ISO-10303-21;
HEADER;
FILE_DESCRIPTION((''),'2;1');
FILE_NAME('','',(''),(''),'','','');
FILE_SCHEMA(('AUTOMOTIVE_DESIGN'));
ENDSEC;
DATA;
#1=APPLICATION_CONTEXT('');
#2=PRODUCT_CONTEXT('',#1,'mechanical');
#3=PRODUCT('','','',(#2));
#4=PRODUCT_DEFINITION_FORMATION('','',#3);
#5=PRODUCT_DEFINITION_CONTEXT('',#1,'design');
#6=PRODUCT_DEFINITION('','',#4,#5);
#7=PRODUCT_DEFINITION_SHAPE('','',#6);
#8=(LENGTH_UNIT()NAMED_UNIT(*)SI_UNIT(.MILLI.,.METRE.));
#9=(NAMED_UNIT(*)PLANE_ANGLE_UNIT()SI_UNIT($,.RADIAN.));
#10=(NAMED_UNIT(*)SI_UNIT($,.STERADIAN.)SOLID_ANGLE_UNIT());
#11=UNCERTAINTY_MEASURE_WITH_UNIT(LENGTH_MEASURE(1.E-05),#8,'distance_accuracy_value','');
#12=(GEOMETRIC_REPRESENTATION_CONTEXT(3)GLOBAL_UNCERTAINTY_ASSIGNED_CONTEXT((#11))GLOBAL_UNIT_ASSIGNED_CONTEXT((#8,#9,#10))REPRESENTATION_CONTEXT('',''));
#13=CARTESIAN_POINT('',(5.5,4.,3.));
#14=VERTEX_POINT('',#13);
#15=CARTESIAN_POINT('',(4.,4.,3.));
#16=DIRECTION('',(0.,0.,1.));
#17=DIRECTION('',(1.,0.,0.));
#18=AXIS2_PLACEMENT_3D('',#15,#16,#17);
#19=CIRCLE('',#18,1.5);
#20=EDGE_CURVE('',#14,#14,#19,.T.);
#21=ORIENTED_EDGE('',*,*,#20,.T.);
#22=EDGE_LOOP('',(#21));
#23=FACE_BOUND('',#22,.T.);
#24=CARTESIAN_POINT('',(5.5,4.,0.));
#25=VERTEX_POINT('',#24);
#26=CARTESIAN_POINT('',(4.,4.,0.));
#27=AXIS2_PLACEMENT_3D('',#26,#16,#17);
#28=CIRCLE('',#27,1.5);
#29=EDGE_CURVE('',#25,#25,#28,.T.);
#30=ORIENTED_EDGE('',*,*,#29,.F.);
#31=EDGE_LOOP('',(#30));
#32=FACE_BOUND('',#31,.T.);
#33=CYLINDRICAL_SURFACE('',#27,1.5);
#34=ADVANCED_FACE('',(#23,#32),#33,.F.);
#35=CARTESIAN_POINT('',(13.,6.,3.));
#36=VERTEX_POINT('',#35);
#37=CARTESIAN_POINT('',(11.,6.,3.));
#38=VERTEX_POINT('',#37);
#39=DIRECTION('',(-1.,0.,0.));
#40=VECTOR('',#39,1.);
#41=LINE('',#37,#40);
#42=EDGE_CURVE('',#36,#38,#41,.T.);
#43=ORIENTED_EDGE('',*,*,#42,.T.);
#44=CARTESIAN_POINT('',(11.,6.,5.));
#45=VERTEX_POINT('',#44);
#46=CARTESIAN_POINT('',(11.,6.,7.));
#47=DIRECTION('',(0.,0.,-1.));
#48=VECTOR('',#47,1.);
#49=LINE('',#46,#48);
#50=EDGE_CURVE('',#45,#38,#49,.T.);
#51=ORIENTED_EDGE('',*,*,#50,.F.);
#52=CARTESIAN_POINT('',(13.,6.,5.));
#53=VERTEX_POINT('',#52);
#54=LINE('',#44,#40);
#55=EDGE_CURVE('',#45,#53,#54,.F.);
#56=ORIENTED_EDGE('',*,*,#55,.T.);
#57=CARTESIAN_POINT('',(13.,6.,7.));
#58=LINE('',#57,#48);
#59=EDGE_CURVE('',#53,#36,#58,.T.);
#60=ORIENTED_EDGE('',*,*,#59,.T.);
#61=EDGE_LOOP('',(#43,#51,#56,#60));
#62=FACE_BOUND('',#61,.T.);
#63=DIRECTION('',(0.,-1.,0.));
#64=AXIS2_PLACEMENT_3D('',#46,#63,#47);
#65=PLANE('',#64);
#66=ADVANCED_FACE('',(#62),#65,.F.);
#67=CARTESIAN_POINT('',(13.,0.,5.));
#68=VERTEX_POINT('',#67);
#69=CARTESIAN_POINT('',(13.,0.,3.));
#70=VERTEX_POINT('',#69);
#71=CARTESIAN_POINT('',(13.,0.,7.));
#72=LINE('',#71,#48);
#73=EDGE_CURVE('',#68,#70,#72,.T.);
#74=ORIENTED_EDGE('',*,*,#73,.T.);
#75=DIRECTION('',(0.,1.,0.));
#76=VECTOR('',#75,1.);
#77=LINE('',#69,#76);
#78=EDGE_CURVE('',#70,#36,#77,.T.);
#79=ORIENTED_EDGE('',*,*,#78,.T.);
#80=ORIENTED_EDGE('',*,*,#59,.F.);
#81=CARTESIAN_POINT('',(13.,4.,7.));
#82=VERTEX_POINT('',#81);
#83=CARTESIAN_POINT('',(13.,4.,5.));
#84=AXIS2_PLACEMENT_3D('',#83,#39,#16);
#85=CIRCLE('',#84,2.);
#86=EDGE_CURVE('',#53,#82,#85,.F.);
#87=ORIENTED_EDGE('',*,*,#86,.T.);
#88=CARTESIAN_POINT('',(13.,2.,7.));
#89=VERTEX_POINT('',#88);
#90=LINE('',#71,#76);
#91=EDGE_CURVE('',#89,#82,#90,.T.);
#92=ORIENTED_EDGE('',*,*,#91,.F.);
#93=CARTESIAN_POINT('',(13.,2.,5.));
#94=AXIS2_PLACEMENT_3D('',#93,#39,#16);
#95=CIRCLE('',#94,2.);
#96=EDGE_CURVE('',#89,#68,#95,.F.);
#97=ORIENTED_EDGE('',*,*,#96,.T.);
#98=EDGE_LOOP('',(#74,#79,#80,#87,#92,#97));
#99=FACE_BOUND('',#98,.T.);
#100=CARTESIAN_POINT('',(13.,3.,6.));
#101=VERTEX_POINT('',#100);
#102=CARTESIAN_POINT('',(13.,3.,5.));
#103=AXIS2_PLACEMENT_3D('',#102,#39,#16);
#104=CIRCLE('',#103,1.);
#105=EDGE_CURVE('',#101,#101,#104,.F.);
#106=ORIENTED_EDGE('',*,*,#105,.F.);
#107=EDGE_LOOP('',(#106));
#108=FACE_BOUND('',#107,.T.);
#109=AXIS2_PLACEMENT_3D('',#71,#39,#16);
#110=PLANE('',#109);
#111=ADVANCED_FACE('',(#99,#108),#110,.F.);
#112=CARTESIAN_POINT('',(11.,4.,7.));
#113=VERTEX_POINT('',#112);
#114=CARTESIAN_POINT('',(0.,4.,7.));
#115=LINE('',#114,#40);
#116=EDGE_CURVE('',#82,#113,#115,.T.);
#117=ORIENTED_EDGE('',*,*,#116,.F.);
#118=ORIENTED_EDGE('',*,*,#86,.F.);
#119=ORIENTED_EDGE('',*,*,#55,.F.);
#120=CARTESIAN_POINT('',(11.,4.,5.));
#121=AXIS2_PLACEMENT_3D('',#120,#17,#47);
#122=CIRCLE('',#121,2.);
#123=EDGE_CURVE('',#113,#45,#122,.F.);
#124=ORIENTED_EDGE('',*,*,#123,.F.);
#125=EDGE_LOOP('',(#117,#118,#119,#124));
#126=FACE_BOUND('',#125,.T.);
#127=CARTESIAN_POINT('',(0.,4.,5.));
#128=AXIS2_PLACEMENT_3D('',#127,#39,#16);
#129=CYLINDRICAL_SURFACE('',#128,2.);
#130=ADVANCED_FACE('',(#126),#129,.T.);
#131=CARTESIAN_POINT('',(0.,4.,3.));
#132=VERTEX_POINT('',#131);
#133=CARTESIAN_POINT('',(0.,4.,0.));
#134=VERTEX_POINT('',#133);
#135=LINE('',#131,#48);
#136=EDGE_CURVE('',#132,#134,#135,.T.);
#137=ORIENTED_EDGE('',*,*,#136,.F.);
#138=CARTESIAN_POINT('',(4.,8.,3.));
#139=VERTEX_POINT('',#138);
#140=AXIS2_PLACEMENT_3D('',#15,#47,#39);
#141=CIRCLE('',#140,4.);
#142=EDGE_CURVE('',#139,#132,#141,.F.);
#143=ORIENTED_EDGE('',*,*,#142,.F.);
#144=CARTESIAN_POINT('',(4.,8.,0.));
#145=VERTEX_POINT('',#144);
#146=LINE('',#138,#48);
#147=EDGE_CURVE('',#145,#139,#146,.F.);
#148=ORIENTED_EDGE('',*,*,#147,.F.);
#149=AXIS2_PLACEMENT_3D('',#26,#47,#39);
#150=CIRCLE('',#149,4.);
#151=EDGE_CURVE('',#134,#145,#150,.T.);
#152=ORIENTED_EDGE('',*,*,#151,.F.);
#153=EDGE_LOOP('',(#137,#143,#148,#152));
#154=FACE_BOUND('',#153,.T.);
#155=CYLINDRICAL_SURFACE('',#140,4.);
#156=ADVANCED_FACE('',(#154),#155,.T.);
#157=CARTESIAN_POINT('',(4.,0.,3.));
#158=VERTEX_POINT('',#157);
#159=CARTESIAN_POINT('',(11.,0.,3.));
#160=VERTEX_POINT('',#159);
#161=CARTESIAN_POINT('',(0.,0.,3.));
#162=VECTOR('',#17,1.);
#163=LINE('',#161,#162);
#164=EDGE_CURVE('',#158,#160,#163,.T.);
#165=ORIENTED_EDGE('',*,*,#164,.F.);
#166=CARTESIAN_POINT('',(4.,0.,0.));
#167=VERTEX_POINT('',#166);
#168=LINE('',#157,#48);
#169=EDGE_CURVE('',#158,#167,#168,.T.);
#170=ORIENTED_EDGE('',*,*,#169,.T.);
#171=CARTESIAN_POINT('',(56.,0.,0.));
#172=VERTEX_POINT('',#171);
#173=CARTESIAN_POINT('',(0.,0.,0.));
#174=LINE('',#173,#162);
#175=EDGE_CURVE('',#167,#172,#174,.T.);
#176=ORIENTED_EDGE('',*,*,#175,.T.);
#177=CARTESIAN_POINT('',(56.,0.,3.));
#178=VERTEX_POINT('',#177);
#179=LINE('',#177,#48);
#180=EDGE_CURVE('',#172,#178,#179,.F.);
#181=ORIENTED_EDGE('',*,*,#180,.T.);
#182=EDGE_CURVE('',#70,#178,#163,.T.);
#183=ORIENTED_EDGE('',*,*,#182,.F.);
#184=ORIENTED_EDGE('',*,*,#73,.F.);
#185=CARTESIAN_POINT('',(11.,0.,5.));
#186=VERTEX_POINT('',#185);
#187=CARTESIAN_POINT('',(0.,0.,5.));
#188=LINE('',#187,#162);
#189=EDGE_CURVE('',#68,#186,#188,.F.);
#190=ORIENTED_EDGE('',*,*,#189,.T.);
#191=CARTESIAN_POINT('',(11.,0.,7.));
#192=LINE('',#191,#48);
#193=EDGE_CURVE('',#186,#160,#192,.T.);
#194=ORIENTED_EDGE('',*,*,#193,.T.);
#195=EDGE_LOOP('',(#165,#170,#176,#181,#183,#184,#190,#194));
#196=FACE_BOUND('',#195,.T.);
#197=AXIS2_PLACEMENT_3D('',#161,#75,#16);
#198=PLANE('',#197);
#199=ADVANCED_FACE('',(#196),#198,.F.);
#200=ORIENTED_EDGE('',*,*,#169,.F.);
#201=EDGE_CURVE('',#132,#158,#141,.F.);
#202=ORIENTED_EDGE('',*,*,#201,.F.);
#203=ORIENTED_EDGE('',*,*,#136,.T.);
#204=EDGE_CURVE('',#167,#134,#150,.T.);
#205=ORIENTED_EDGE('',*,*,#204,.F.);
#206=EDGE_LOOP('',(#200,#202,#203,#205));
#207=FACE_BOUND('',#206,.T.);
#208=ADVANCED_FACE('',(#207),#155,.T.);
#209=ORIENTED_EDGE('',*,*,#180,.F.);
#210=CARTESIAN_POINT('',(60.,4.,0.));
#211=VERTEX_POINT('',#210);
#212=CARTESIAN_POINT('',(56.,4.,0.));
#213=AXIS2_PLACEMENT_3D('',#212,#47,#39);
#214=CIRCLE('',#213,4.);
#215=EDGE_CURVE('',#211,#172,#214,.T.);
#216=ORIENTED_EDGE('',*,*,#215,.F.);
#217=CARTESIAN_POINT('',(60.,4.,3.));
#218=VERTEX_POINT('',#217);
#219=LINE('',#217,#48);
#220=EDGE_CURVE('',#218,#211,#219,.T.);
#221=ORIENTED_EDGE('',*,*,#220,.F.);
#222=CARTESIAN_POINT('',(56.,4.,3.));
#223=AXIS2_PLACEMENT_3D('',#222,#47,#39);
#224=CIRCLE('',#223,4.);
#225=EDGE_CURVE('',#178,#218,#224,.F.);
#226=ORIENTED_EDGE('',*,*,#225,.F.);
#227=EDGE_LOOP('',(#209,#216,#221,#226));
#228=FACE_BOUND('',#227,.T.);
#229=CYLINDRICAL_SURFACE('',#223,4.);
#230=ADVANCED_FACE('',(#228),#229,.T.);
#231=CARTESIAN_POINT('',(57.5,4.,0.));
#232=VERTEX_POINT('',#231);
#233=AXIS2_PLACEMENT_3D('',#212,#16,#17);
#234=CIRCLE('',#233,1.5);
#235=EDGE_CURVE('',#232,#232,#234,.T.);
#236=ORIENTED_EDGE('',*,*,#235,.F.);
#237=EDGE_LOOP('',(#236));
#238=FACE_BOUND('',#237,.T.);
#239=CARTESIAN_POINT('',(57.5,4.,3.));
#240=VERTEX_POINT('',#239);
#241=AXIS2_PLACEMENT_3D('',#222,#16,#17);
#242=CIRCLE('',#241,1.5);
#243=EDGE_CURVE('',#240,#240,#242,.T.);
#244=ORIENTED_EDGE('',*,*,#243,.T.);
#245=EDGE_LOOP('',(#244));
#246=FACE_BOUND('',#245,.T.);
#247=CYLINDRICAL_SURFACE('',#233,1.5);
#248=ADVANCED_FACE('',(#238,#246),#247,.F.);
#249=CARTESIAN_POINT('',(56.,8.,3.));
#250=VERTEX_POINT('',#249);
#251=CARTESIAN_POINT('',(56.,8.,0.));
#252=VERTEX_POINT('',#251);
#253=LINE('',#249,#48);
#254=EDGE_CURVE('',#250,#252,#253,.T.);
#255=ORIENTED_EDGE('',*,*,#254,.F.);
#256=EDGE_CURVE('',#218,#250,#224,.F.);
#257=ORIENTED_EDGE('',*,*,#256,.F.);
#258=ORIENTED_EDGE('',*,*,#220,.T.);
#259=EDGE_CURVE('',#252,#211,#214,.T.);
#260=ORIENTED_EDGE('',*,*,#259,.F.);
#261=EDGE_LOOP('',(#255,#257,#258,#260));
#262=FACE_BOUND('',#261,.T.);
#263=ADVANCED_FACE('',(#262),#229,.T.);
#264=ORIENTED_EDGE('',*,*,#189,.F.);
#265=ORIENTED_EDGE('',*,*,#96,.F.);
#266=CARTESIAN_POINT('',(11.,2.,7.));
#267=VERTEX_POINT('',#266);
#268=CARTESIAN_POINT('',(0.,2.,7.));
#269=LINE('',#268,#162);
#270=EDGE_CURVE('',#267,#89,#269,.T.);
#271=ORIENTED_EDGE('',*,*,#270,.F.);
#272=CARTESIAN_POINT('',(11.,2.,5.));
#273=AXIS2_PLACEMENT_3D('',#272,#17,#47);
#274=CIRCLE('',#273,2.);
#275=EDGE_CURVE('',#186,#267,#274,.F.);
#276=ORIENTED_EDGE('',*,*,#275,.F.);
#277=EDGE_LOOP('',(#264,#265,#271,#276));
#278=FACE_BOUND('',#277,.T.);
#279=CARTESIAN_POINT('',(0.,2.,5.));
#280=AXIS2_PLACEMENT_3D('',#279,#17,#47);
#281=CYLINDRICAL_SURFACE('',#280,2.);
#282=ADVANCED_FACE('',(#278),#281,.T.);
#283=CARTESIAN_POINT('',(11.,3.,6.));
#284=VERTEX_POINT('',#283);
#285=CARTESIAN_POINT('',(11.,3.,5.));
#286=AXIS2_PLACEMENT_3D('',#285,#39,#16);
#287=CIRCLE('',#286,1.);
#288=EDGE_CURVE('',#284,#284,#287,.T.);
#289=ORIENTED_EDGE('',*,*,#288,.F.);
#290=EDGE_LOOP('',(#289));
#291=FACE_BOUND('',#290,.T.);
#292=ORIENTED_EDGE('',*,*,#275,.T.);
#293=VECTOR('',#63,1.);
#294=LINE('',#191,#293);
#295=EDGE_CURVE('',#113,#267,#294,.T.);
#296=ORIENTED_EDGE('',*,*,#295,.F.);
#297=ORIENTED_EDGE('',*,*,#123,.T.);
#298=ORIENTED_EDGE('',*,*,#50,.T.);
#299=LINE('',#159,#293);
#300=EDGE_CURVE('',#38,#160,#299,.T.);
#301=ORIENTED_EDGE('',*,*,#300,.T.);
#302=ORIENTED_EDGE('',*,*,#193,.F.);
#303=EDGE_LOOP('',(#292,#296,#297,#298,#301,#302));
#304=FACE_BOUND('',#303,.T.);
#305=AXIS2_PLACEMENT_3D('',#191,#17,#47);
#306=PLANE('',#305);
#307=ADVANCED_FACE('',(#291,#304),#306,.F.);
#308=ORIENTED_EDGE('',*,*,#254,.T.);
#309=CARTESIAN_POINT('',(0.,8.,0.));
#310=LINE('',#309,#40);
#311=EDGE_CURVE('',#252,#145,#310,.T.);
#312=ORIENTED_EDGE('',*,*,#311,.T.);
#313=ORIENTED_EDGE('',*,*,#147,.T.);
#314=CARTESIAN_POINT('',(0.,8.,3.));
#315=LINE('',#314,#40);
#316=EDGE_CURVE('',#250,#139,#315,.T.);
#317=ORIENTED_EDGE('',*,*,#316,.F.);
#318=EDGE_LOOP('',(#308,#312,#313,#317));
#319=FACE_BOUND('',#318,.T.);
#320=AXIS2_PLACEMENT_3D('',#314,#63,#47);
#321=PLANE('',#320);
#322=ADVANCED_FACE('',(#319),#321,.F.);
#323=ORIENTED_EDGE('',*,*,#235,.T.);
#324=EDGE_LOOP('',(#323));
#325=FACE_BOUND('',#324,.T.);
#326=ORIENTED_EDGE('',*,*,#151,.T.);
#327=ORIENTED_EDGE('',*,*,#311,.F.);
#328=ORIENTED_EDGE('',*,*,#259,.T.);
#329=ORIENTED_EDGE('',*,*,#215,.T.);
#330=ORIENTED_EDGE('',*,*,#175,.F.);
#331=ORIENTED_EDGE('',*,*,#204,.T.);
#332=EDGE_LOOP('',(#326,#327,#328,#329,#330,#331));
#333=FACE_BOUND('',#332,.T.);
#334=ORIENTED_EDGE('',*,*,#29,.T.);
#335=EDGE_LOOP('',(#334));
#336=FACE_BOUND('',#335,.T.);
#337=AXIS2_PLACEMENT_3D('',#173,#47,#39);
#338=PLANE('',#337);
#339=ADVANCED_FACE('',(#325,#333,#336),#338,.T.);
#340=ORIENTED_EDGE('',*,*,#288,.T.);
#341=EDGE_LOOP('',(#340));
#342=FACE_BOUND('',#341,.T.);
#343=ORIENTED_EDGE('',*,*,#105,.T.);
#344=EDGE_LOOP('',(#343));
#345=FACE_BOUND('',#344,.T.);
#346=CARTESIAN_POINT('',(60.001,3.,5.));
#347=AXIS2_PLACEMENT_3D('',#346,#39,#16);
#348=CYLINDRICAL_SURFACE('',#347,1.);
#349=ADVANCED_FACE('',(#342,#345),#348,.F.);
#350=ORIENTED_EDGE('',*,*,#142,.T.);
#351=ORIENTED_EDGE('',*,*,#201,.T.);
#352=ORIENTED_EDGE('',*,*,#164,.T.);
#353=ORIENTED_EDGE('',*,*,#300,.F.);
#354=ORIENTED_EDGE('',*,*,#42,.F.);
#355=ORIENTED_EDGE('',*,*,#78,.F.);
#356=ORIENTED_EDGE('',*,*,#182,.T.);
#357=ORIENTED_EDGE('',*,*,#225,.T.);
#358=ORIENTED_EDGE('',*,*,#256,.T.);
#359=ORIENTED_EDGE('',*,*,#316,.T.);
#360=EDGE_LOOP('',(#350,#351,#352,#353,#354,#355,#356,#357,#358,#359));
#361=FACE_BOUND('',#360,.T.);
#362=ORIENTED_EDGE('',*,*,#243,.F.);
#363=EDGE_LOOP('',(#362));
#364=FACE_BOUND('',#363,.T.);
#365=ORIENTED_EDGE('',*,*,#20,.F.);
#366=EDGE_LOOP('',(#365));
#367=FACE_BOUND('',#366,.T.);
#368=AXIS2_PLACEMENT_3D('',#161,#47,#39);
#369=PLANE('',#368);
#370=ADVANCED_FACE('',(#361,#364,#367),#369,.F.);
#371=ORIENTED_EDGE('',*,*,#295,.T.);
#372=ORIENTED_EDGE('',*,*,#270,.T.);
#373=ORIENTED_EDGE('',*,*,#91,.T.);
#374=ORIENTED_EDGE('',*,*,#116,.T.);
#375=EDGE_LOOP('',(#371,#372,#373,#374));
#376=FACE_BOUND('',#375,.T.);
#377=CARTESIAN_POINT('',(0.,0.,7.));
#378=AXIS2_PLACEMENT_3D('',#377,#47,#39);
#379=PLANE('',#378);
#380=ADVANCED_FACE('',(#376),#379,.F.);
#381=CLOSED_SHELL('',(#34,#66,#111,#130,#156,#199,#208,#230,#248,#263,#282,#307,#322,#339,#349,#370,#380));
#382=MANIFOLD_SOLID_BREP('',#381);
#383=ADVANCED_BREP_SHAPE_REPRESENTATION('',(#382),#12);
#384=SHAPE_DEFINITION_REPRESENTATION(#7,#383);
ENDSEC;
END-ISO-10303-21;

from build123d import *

# Parameters (mm, degrees)
SZKIC1_W                    = 60
SZKIC1_H                    = 8
DODANIE_WYCI_GNI_CIE1_DEPTH = 3
ZAOKR_GLENIE1_R             = 4
SZKIC2_R                    = 1.5
WYTNIJ_WYCI_GNI_CIE1_DEPTH  = 3
SZKIC3_W                    = 2
SZKIC3_H                    = 6
DODANIE_WYCI_GNI_CIE2_DEPTH = 4
WYTNIJ_WYCI_GNI_CIE2_REACH  = 52.14
SZKIC4_R                    = 1
ZAOKR_GLENIE2_R             = 2


with BuildPart() as part:
    # Szkic1 → Dodanie-wyciągnięcie1 (new body)
    with BuildSketch(Plane.XY):
        with Locations((30, 4)):
            Rectangle(SZKIC1_W, SZKIC1_H)
    extrude(amount=DODANIE_WYCI_GNI_CIE1_DEPTH)

    # Zaokrąglenie1
    zaokr_glenie1_edges = [part.edges().sort_by_distance(p)[0] for p in [
        (0, 0, 1.5),
        (0, 8, 1.5),
        (60, 8, 1.5),
        (60, 0, 1.5),
    ]]
    fillet(zaokr_glenie1_edges, radius=ZAOKR_GLENIE1_R - 0.0001)  # a hair under: the kernel refuses the full size

    # Szkic2 → Wytnij-wyciągnięcie1 (cut)
    with BuildSketch(Plane.XY.offset(3)):
        with Locations((4, 4)):
            Circle(SZKIC2_R)
        with Locations((56, 4)):
            Circle(SZKIC2_R)
    extrude(amount=-WYTNIJ_WYCI_GNI_CIE1_DEPTH, mode=Mode.SUBTRACT)

    # Szkic3 → Dodanie-wyciągnięcie2 (add)
    with BuildSketch(Plane.XY.offset(3)):
        with Locations((12, 3)):
            Rectangle(SZKIC3_W, SZKIC3_H)
    extrude(amount=DODANIE_WYCI_GNI_CIE2_DEPTH)

    # Szkic4 → Wytnij-wyciągnięcie2 (cut, up to next)
    with BuildSketch(Plane.ZY.offset(-11), mode=Mode.PRIVATE) as wytnij_wyci_gni_cie2_sk1:
        with Locations((5, 3)):
            Circle(SZKIC4_R)
    wytnij_wyci_gni_cie2_tool1 = extrude(wytnij_wyci_gni_cie2_sk1.sketch, amount=-WYTNIJ_WYCI_GNI_CIE2_REACH, mode=Mode.PRIVATE) & part.part
    add(wytnij_wyci_gni_cie2_tool1.solids().sort_by_distance((11, 3, 5))[0], mode=Mode.SUBTRACT)

    # Zaokrąglenie2
    zaokr_glenie2_edges = [part.edges().sort_by_distance(p)[0] for p in [
        (12, 0, 7),
        (12, 6, 7),
    ]]
    fillet(zaokr_glenie2_edges, radius=ZAOKR_GLENIE2_R)


solid = part.part
